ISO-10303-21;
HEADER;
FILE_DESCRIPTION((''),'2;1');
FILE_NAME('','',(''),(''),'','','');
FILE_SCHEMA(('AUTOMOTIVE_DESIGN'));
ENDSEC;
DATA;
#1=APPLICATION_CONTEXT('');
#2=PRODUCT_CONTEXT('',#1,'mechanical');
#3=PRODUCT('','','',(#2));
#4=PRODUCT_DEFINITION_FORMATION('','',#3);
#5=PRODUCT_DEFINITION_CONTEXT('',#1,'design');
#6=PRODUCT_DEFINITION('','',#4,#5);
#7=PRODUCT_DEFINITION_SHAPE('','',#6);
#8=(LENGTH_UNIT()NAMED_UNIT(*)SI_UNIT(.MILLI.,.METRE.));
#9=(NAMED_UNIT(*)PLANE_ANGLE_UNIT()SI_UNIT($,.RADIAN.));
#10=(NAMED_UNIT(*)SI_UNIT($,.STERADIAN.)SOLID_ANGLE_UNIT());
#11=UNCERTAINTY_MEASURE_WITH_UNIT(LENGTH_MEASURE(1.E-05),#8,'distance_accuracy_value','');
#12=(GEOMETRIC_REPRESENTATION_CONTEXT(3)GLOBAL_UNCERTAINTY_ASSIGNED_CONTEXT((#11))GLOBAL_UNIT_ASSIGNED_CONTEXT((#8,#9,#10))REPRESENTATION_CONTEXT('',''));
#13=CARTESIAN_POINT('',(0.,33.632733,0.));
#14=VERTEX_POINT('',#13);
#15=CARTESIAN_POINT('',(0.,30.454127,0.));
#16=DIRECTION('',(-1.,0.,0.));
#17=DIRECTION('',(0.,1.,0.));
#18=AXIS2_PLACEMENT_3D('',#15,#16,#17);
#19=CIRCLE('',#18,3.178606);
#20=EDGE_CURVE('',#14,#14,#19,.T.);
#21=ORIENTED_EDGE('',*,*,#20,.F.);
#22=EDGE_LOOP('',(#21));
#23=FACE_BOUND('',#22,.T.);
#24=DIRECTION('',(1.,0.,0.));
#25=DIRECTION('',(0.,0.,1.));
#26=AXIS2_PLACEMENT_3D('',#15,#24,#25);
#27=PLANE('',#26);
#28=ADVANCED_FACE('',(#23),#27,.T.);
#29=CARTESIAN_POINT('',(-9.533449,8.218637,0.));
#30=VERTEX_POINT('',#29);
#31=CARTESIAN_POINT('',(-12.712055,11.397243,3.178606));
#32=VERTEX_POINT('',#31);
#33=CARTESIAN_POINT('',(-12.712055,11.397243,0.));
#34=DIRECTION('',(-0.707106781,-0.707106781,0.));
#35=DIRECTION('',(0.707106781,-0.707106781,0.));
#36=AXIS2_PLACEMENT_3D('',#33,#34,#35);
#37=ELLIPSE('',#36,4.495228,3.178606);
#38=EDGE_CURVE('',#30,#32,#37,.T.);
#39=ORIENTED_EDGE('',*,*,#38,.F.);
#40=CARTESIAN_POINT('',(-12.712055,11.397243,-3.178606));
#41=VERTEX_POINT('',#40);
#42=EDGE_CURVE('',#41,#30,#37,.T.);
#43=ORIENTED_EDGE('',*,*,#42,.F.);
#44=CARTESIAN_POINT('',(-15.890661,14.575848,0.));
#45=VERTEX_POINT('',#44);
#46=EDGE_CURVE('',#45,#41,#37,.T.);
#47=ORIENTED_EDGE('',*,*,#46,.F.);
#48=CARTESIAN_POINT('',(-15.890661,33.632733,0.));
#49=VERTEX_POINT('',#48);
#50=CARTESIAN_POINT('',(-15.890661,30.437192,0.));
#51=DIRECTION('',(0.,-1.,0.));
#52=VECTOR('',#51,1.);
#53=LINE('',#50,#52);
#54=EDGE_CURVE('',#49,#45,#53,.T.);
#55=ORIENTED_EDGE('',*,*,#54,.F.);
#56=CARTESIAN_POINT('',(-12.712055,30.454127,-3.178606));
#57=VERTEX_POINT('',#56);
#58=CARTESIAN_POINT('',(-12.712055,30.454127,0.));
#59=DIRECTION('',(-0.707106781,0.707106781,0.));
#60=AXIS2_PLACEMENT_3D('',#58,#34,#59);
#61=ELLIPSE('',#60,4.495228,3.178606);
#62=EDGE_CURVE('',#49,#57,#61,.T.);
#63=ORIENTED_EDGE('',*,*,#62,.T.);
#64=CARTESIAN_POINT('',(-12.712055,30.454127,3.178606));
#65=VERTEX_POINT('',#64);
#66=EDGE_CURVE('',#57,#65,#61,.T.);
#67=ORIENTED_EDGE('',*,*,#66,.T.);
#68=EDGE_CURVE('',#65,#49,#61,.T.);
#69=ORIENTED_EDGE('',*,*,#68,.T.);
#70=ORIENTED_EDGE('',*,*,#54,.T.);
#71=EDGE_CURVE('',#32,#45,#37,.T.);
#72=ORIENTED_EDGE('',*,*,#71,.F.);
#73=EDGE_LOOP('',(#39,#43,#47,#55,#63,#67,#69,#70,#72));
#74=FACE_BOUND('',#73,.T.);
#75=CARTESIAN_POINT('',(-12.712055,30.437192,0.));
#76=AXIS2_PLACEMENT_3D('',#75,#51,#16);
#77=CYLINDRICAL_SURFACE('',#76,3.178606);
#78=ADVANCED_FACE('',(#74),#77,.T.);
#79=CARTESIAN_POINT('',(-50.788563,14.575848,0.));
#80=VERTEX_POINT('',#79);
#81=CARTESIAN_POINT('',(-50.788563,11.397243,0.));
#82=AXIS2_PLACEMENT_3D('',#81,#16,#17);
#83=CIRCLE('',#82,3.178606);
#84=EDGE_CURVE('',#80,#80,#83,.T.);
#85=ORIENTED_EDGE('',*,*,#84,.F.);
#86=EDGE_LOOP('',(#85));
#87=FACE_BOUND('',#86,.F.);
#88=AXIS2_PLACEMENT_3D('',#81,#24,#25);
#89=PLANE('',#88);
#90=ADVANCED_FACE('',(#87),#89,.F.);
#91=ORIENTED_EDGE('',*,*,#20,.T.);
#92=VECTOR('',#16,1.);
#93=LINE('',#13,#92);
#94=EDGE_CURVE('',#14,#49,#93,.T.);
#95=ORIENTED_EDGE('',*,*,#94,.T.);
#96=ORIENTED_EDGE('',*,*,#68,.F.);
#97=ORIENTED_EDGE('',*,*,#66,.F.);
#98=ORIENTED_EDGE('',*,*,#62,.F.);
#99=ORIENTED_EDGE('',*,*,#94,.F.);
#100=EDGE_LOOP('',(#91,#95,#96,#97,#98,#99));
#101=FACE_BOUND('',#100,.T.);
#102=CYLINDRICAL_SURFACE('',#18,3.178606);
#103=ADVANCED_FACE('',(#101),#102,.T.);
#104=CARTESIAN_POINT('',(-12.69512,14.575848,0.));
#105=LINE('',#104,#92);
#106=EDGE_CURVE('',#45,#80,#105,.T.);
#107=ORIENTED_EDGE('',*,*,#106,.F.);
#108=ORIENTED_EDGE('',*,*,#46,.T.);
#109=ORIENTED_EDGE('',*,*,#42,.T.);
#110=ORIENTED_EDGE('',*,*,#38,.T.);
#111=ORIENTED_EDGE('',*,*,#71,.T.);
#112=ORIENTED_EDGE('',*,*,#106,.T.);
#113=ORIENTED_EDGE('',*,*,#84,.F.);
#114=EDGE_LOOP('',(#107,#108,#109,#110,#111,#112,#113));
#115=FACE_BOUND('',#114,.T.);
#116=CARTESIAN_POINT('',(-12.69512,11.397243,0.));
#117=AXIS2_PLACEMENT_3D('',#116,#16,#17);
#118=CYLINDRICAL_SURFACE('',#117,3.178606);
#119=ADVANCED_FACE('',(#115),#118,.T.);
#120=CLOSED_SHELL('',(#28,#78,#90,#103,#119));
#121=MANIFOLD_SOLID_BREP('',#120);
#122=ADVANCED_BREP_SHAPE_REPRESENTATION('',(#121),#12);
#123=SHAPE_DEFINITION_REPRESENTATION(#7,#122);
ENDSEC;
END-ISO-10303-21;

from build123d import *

# Parameters (mm, degrees)
F1_R = 3.1786059016


with BuildPart() as f2:
    # F2: sweep along a path in F0
    with BuildLine(Plane.XY) as f2_path:
        Line((0, 30.4371919483), (-12.6951197162, 30.4371919483))
        Line((-12.6951197162, 30.4371919483), (-12.6951197162, 11.3803073764))
        Line((-12.6951197162, 11.3803073764), (-50.7885627449, 11.3803073764))
    # F1 (on Right) → F2 (sweep)
    with BuildSketch(Plane.YZ):
        with Locations((30.454127118, 0)):
            Circle(F1_R)
    sweep(path=f2_path.line, transition=Transition.RIGHT)


solid = f2.part
